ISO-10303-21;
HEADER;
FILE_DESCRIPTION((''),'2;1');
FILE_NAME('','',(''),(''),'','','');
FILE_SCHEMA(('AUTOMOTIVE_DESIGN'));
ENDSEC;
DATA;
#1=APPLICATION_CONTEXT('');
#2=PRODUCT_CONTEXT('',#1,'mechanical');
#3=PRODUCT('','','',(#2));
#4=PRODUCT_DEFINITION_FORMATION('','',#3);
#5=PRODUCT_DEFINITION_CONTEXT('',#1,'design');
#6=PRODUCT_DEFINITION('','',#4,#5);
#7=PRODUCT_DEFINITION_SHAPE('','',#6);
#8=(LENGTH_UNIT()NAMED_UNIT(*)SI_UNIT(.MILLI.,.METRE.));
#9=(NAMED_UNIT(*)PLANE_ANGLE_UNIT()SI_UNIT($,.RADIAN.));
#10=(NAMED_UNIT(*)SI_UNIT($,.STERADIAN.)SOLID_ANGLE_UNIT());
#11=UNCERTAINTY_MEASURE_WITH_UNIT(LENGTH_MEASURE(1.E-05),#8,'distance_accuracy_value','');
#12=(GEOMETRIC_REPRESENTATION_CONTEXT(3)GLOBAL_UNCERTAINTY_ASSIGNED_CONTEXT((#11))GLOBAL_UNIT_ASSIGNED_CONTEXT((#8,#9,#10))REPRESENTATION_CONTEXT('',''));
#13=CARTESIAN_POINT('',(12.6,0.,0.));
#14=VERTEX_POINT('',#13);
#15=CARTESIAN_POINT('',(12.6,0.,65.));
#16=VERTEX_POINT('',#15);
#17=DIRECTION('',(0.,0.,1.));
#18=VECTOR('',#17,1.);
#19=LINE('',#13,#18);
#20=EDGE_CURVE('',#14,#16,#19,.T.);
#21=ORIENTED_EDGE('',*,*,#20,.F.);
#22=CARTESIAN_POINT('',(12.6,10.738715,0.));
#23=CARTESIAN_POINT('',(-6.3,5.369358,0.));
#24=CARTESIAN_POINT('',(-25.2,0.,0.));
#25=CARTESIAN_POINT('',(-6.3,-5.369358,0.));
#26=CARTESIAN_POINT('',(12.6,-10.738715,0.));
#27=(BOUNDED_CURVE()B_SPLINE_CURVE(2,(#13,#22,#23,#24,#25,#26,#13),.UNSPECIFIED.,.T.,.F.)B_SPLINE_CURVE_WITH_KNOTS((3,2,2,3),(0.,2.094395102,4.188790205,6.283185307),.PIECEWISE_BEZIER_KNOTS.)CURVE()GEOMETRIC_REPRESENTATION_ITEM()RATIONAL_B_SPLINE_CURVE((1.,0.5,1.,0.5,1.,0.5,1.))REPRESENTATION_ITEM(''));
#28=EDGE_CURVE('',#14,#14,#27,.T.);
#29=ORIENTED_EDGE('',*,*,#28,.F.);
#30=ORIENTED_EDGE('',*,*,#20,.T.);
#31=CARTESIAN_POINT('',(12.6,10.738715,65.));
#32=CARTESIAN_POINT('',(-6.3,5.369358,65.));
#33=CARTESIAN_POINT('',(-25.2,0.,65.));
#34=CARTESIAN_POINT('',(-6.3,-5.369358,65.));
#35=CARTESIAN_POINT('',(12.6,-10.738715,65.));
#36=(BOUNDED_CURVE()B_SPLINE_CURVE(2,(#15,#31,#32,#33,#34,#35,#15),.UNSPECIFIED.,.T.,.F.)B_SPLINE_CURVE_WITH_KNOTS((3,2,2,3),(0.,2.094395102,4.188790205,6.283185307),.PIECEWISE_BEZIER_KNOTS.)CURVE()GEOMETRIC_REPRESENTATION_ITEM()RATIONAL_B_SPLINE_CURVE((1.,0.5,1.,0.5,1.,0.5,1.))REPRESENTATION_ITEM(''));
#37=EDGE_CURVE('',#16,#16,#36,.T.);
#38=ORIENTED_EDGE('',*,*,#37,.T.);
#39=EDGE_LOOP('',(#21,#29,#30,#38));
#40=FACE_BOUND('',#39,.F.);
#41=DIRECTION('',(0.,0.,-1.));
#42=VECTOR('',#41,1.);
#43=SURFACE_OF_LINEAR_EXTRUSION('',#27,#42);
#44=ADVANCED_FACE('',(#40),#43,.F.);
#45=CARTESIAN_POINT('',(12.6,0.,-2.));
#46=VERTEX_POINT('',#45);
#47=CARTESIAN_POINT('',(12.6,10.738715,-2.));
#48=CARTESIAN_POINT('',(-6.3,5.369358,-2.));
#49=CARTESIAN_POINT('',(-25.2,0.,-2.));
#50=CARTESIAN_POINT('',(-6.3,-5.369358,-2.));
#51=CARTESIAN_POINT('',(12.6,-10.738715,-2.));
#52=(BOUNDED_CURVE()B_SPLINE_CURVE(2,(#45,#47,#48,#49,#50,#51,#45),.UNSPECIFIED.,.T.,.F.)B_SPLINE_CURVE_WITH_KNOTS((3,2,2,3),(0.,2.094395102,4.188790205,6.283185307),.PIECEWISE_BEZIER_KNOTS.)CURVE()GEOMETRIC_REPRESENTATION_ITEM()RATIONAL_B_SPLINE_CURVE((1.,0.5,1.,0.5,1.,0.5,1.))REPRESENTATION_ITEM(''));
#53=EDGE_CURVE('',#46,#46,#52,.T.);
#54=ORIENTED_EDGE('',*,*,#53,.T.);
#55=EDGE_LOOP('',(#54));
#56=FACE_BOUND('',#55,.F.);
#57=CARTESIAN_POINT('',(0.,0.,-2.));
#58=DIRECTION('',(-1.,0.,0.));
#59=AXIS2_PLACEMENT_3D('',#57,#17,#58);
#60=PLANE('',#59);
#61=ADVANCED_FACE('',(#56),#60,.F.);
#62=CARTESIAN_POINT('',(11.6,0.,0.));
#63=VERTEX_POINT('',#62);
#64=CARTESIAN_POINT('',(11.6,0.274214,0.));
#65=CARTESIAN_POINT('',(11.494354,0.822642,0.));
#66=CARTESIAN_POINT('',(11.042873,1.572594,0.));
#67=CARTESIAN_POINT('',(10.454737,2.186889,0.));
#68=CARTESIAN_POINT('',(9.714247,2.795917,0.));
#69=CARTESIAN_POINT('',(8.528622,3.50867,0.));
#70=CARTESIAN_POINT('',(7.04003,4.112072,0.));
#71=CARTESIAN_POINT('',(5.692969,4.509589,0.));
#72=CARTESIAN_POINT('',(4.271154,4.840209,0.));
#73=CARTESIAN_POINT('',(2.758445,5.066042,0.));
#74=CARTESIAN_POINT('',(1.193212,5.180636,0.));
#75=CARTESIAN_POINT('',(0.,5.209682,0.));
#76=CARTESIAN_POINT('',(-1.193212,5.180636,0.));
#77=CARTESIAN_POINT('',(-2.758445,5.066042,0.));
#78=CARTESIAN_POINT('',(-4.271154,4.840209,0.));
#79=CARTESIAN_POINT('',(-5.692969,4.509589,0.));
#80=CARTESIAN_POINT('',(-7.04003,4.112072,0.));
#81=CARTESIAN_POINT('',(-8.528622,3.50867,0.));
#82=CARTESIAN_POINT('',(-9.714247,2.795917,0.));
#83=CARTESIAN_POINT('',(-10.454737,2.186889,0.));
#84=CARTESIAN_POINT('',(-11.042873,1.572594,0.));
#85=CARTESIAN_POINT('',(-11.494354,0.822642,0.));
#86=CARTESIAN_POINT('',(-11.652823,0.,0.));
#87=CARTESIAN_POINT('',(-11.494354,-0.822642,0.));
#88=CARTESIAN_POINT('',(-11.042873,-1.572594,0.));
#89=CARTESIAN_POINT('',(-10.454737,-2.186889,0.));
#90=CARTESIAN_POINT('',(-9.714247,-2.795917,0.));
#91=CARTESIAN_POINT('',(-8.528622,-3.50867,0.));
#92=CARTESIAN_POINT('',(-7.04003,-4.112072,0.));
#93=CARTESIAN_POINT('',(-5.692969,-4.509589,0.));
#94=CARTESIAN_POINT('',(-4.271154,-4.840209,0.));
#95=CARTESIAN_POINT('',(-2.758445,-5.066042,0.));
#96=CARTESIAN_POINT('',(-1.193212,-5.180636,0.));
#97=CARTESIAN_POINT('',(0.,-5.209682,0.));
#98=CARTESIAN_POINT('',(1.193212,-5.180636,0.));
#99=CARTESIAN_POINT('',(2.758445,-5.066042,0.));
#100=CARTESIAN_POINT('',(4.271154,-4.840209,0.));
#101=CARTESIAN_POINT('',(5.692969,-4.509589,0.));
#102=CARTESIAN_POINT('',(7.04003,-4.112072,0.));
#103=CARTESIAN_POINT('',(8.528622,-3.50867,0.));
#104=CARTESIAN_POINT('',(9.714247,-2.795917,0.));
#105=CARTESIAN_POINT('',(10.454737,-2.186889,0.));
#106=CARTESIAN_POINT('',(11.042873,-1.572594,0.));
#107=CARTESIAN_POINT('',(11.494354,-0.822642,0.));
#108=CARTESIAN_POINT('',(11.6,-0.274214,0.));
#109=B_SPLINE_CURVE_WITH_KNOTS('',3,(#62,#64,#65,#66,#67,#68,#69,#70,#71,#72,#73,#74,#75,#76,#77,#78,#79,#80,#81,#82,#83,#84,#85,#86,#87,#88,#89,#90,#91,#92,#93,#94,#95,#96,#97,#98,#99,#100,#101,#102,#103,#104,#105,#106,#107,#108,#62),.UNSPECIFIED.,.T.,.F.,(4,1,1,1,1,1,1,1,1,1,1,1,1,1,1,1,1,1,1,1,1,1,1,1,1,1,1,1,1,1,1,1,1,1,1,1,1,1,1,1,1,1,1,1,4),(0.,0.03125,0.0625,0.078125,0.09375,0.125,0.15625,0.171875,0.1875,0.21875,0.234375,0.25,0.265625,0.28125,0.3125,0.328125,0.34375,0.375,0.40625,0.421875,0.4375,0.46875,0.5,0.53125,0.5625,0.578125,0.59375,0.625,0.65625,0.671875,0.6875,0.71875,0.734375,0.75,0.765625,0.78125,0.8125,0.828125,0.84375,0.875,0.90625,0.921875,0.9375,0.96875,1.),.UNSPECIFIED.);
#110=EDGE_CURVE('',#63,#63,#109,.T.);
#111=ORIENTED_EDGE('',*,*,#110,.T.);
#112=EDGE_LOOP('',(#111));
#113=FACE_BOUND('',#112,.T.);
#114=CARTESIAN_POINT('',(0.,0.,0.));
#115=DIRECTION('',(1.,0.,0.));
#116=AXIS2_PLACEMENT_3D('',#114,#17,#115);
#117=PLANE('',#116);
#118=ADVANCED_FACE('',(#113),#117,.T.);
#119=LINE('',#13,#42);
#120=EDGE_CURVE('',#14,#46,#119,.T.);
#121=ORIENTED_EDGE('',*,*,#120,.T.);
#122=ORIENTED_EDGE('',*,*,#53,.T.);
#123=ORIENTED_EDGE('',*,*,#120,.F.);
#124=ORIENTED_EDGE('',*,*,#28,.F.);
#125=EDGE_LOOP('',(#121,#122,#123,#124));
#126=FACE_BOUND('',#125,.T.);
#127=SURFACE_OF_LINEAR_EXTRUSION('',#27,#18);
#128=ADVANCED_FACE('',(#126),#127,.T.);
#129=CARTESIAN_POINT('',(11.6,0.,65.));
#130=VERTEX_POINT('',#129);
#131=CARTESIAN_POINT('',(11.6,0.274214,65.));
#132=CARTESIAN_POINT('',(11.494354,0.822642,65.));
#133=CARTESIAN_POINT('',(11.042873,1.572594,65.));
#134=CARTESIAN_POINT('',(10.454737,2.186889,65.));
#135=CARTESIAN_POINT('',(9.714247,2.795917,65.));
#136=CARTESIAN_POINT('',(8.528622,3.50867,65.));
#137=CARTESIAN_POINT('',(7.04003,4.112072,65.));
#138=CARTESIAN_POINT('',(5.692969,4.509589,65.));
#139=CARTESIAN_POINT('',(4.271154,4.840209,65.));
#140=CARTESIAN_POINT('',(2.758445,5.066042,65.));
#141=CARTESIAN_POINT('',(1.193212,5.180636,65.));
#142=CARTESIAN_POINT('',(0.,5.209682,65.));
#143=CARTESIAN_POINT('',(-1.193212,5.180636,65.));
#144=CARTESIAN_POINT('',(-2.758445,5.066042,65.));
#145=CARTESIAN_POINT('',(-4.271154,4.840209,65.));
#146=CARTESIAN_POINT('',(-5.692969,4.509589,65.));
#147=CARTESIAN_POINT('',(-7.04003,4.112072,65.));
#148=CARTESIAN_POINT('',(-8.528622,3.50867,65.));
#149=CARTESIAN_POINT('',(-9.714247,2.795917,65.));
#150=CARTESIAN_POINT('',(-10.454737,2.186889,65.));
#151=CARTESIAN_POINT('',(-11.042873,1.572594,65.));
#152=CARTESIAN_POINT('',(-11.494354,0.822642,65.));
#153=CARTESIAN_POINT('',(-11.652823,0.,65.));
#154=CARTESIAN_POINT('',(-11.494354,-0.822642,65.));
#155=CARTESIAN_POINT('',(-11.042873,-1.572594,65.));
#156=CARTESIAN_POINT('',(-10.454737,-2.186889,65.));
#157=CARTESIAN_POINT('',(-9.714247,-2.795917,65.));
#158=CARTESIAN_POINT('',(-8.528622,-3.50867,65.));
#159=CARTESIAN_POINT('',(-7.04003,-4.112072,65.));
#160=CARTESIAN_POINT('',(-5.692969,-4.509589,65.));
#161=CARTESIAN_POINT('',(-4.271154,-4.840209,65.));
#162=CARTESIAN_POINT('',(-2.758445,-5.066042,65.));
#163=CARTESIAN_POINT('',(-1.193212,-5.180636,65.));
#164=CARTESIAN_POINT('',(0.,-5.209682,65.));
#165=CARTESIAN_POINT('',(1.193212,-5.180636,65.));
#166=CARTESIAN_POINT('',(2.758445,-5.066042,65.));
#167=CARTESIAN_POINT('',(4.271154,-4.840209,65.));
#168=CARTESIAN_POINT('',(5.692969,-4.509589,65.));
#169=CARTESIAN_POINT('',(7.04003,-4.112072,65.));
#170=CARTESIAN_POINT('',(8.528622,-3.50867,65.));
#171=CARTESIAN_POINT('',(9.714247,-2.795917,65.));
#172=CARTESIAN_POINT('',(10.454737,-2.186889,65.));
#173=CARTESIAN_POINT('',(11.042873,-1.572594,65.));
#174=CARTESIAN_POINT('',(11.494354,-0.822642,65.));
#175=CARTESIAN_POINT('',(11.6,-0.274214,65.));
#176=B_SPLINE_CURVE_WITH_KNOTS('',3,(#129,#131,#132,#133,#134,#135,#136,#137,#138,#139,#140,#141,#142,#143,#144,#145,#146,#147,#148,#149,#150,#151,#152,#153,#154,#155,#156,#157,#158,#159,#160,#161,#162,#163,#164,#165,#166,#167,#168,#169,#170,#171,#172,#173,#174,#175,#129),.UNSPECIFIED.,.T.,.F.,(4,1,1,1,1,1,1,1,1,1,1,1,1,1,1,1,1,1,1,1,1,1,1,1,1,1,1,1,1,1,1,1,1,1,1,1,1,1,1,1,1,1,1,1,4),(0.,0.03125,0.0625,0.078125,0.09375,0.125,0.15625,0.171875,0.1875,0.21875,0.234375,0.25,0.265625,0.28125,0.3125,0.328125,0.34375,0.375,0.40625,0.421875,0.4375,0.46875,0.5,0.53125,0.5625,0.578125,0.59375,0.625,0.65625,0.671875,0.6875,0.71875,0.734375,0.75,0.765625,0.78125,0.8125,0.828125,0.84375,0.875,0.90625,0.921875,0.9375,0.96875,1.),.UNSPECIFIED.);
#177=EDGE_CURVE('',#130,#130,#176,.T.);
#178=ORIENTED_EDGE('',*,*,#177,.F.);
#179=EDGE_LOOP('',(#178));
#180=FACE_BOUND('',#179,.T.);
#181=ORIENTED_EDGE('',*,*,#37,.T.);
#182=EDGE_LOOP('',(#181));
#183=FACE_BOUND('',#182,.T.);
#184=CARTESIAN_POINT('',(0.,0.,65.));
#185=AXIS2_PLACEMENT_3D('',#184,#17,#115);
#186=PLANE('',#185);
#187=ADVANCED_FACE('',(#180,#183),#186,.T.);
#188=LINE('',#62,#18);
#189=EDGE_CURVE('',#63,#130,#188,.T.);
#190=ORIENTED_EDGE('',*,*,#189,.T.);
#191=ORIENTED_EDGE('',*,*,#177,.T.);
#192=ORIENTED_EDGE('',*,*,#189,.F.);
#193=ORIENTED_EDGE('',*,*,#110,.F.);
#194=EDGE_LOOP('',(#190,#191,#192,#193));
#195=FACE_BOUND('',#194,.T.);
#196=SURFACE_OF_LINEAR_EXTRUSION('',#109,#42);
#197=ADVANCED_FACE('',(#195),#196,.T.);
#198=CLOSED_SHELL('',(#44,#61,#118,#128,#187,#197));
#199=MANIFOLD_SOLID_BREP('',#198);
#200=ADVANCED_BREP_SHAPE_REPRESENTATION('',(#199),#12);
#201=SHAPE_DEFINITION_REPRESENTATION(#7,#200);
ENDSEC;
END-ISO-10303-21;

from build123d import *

# Parameters (mm, degrees)
F1_DEPTH = 65
F2_DEPTH = 2


# Not quite as in the source:
# - the dataset's text gives a spline's control points without its knots; the knots are read off the source's solid


with BuildPart() as f1:
    # F0 (on Top) → F1 (new body)
    with BuildSketch(Plane.XY):
        with BuildLine():
            add(Edge.make_bspline(
                [(12.6, 0), (12.6, 10.7387150069), (-6.3, 5.3693575035), (-25.2, 0), (-6.3, -5.3693575035), (12.6, -10.7387150069), (12.6, 0)],
                knots=[0, 0, 0, 2.0943951024, 2.0943951024, 4.1887902048, 4.1887902048, 6.2831853072, 6.2831853072, 6.2831853072], degree=2, weights=[1, 0.5, 1, 0.5, 1, 0.5, 1]))
        make_face()
        with BuildLine():
            add(Edge.make_bspline(
                [(11.6, 0), (11.6, 0.2742138603), (11.4943541756, 0.8226415809), (11.0428725229, 1.5725942573), (10.454737187, 2.1868891174), (9.7142468376, 2.795917269), (8.5286217571, 3.5086701034), (7.0400300216, 4.1120721714), (5.6929691733, 4.5095892166), (4.2711535866, 4.8402086313), (2.7584453229, 5.0660415884), (1.1932120753, 5.1806364813), (0, 5.2096817593), (-1.1932120753, 5.1806364813), (-2.7584453229, 5.0660415884), (-4.2711535866, 4.8402086313), (-5.6929691733, 4.5095892166), (-7.0400300216, 4.1120721714), (-8.5286217571, 3.5086701034), (-9.7142468376, 2.795917269), (-10.454737187, 2.1868891174), (-11.0428725229, 1.5725942573), (-11.4943541756, 0.8226415809), (-11.6528229122, 0), (-11.4943541756, -0.8226415809), (-11.0428725229, -1.5725942573), (-10.454737187, -2.1868891174), (-9.7142468376, -2.795917269), (-8.5286217571, -3.5086701034), (-7.0400300216, -4.1120721714), (-5.6929691733, -4.5095892166), (-4.2711535866, -4.8402086313), (-2.7584453229, -5.0660415884), (-1.1932120753, -5.1806364813), (0, -5.2096817593), (1.1932120753, -5.1806364813), (2.7584453229, -5.0660415884), (4.2711535866, -4.8402086313), (5.6929691733, -4.5095892166), (7.0400300216, -4.1120721714), (8.5286217571, -3.5086701034), (9.7142468376, -2.795917269), (10.454737187, -2.1868891174), (11.0428725229, -1.5725942573), (11.4943541756, -0.8226415809), (11.6, -0.2742138603), (11.6, 0)],
                knots=[0, 0, 0, 0, 0.03125, 0.0625, 0.078125, 0.09375, 0.125, 0.15625, 0.171875, 0.1875, 0.21875, 0.234375, 0.25, 0.265625, 0.28125, 0.3125, 0.328125, 0.34375, 0.375, 0.40625, 0.421875, 0.4375, 0.46875, 0.5, 0.53125, 0.5625, 0.578125, 0.59375, 0.625, 0.65625, 0.671875, 0.6875, 0.71875, 0.734375, 0.75, 0.765625, 0.78125, 0.8125, 0.828125, 0.84375, 0.875, 0.90625, 0.921875, 0.9375, 0.96875, 1, 1, 1, 1], degree=3))
        make_face(mode=Mode.SUBTRACT)
    extrude(amount=F1_DEPTH)

    # F1_face (on face) + F0 (on Top) → F2 (join)
    with BuildSketch(Plane(origin=(0.2988225551, 0, 0), x_dir=(1, 0, 0), z_dir=(0, 0, -1))):
        with BuildLine():
            add(Edge.make_bspline(
                [(12.3011774449, 0), (12.3011774449, -10.7387150069), (-6.5988225551, -5.3693575035), (-25.4988225551, 0), (-6.5988225551, 5.3693575035), (12.3011774449, 10.7387150069), (12.3011774449, 0)],
                knots=[0, 0, 0, 2.0943951024, 2.0943951024, 4.1887902048, 4.1887902048, 6.2831853072, 6.2831853072, 6.2831853072], degree=2, weights=[1, 0.5, 1, 0.5, 1, 0.5, 1]))
        make_face()
        with BuildLine():
            add(Edge.make_bspline(
                [(11.3011774449, 0), (11.3011774449, -0.2742138603), (11.1955316205, -0.8226415809), (10.7440499678, -1.5725942573), (10.1559146319, -2.1868891174), (9.4154242825, -2.795917269), (8.229799202, -3.5086701034), (6.7412074664, -4.1120721714), (5.3941466182, -4.5095892166), (3.9723310315, -4.8402086313), (2.4596227678, -5.0660415884), (0.8943895202, -5.1806364813), (-0.2988225551, -5.2096817593), (-1.4920346304, -5.1806364813), (-3.057267878, -5.0660415884), (-4.5699761417, -4.8402086313), (-5.9917917284, -4.5095892166), (-7.3388525767, -4.1120721714), (-8.8274443123, -3.5086701034), (-10.0130693927, -2.795917269), (-10.7535597421, -2.1868891174), (-11.341695078, -1.5725942573), (-11.7931767308, -0.8226415809), (-11.9516454673, 0), (-11.7931767308, 0.8226415809), (-11.341695078, 1.5725942573), (-10.7535597421, 2.1868891174), (-10.0130693927, 2.795917269), (-8.8274443123, 3.5086701034), (-7.3388525767, 4.1120721714), (-5.9917917284, 4.5095892166), (-4.5699761417, 4.8402086313), (-3.057267878, 5.0660415884), (-1.4920346304, 5.1806364813), (-0.2988225551, 5.2096817593), (0.8943895202, 5.1806364813), (2.4596227678, 5.0660415884), (3.9723310315, 4.8402086313), (5.3941466182, 4.5095892166), (6.7412074664, 4.1120721714), (8.229799202, 3.5086701034), (9.4154242825, 2.795917269), (10.1559146319, 2.1868891174), (10.7440499678, 1.5725942573), (11.1955316205, 0.8226415809), (11.3011774449, 0.2742138603), (11.3011774449, 0)],
                knots=[0, 0, 0, 0, 0.03125, 0.0625, 0.078125, 0.09375, 0.125, 0.15625, 0.171875, 0.1875, 0.21875, 0.234375, 0.25, 0.265625, 0.28125, 0.3125, 0.328125, 0.34375, 0.375, 0.40625, 0.421875, 0.4375, 0.46875, 0.5, 0.53125, 0.5625, 0.578125, 0.59375, 0.625, 0.65625, 0.671875, 0.6875, 0.71875, 0.734375, 0.75, 0.765625, 0.78125, 0.8125, 0.828125, 0.84375, 0.875, 0.90625, 0.921875, 0.9375, 0.96875, 1, 1, 1, 1], degree=3))
        make_face(mode=Mode.SUBTRACT)
    with BuildSketch(Plane.XY):
        with BuildLine():
            add(Edge.make_bspline(
                [(12.6, 0), (12.6, 10.7387150069), (-6.3, 5.3693575035), (-25.2, 0), (-6.3, -5.3693575035), (12.6, -10.7387150069), (12.6, 0)],
                knots=[0, 0, 0, 2.0943951024, 2.0943951024, 4.1887902048, 4.1887902048, 6.2831853072, 6.2831853072, 6.2831853072], degree=2, weights=[1, 0.5, 1, 0.5, 1, 0.5, 1]))
        make_face()
        with BuildLine():
            add(Edge.make_bspline(
                [(11.6, 0), (11.6, 0.2742138603), (11.4943541756, 0.8226415809), (11.0428725229, 1.5725942573), (10.454737187, 2.1868891174), (9.7142468376, 2.795917269), (8.5286217571, 3.5086701034), (7.0400300216, 4.1120721714), (5.6929691733, 4.5095892166), (4.2711535866, 4.8402086313), (2.7584453229, 5.0660415884), (1.1932120753, 5.1806364813), (0, 5.2096817593), (-1.1932120753, 5.1806364813), (-2.7584453229, 5.0660415884), (-4.2711535866, 4.8402086313), (-5.6929691733, 4.5095892166), (-7.0400300216, 4.1120721714), (-8.5286217571, 3.5086701034), (-9.7142468376, 2.795917269), (-10.454737187, 2.1868891174), (-11.0428725229, 1.5725942573), (-11.4943541756, 0.8226415809), (-11.6528229122, 0), (-11.4943541756, -0.8226415809), (-11.0428725229, -1.5725942573), (-10.454737187, -2.1868891174), (-9.7142468376, -2.795917269), (-8.5286217571, -3.5086701034), (-7.0400300216, -4.1120721714), (-5.6929691733, -4.5095892166), (-4.2711535866, -4.8402086313), (-2.7584453229, -5.0660415884), (-1.1932120753, -5.1806364813), (0, -5.2096817593), (1.1932120753, -5.1806364813), (2.7584453229, -5.0660415884), (4.2711535866, -4.8402086313), (5.6929691733, -4.5095892166), (7.0400300216, -4.1120721714), (8.5286217571, -3.5086701034), (9.7142468376, -2.795917269), (10.454737187, -2.1868891174), (11.0428725229, -1.5725942573), (11.4943541756, -0.8226415809), (11.6, -0.2742138603), (11.6, 0)],
                knots=[0, 0, 0, 0, 0.03125, 0.0625, 0.078125, 0.09375, 0.125, 0.15625, 0.171875, 0.1875, 0.21875, 0.234375, 0.25, 0.265625, 0.28125, 0.3125, 0.328125, 0.34375, 0.375, 0.40625, 0.421875, 0.4375, 0.46875, 0.5, 0.53125, 0.5625, 0.578125, 0.59375, 0.625, 0.65625, 0.671875, 0.6875, 0.71875, 0.734375, 0.75, 0.765625, 0.78125, 0.8125, 0.828125, 0.84375, 0.875, 0.90625, 0.921875, 0.9375, 0.96875, 1, 1, 1, 1], degree=3))
        make_face(mode=Mode.SUBTRACT)
        with BuildLine():
            add(Edge.make_bspline(
                [(11.6, 0), (11.6, 0.2742138603), (11.4943541756, 0.8226415809), (11.0428725229, 1.5725942573), (10.454737187, 2.1868891174), (9.7142468376, 2.795917269), (8.5286217571, 3.5086701034), (7.0400300216, 4.1120721714), (5.6929691733, 4.5095892166), (4.2711535866, 4.8402086313), (2.7584453229, 5.0660415884), (1.1932120753, 5.1806364813), (0, 5.2096817593), (-1.1932120753, 5.1806364813), (-2.7584453229, 5.0660415884), (-4.2711535866, 4.8402086313), (-5.6929691733, 4.5095892166), (-7.0400300216, 4.1120721714), (-8.5286217571, 3.5086701034), (-9.7142468376, 2.795917269), (-10.454737187, 2.1868891174), (-11.0428725229, 1.5725942573), (-11.4943541756, 0.8226415809), (-11.6528229122, 0), (-11.4943541756, -0.8226415809), (-11.0428725229, -1.5725942573), (-10.454737187, -2.1868891174), (-9.7142468376, -2.795917269), (-8.5286217571, -3.5086701034), (-7.0400300216, -4.1120721714), (-5.6929691733, -4.5095892166), (-4.2711535866, -4.8402086313), (-2.7584453229, -5.0660415884), (-1.1932120753, -5.1806364813), (0, -5.2096817593), (1.1932120753, -5.1806364813), (2.7584453229, -5.0660415884), (4.2711535866, -4.8402086313), (5.6929691733, -4.5095892166), (7.0400300216, -4.1120721714), (8.5286217571, -3.5086701034), (9.7142468376, -2.795917269), (10.454737187, -2.1868891174), (11.0428725229, -1.5725942573), (11.4943541756, -0.8226415809), (11.6, -0.2742138603), (11.6, 0)],
                knots=[0, 0, 0, 0, 0.03125, 0.0625, 0.078125, 0.09375, 0.125, 0.15625, 0.171875, 0.1875, 0.21875, 0.234375, 0.25, 0.265625, 0.28125, 0.3125, 0.328125, 0.34375, 0.375, 0.40625, 0.421875, 0.4375, 0.46875, 0.5, 0.53125, 0.5625, 0.578125, 0.59375, 0.625, 0.65625, 0.671875, 0.6875, 0.71875, 0.734375, 0.75, 0.765625, 0.78125, 0.8125, 0.828125, 0.84375, 0.875, 0.90625, 0.921875, 0.9375, 0.96875, 1, 1, 1, 1], degree=3))
        make_face()
    extrude(amount=F2_DEPTH, dir=(0, 0, -1))


solid = f1.part
